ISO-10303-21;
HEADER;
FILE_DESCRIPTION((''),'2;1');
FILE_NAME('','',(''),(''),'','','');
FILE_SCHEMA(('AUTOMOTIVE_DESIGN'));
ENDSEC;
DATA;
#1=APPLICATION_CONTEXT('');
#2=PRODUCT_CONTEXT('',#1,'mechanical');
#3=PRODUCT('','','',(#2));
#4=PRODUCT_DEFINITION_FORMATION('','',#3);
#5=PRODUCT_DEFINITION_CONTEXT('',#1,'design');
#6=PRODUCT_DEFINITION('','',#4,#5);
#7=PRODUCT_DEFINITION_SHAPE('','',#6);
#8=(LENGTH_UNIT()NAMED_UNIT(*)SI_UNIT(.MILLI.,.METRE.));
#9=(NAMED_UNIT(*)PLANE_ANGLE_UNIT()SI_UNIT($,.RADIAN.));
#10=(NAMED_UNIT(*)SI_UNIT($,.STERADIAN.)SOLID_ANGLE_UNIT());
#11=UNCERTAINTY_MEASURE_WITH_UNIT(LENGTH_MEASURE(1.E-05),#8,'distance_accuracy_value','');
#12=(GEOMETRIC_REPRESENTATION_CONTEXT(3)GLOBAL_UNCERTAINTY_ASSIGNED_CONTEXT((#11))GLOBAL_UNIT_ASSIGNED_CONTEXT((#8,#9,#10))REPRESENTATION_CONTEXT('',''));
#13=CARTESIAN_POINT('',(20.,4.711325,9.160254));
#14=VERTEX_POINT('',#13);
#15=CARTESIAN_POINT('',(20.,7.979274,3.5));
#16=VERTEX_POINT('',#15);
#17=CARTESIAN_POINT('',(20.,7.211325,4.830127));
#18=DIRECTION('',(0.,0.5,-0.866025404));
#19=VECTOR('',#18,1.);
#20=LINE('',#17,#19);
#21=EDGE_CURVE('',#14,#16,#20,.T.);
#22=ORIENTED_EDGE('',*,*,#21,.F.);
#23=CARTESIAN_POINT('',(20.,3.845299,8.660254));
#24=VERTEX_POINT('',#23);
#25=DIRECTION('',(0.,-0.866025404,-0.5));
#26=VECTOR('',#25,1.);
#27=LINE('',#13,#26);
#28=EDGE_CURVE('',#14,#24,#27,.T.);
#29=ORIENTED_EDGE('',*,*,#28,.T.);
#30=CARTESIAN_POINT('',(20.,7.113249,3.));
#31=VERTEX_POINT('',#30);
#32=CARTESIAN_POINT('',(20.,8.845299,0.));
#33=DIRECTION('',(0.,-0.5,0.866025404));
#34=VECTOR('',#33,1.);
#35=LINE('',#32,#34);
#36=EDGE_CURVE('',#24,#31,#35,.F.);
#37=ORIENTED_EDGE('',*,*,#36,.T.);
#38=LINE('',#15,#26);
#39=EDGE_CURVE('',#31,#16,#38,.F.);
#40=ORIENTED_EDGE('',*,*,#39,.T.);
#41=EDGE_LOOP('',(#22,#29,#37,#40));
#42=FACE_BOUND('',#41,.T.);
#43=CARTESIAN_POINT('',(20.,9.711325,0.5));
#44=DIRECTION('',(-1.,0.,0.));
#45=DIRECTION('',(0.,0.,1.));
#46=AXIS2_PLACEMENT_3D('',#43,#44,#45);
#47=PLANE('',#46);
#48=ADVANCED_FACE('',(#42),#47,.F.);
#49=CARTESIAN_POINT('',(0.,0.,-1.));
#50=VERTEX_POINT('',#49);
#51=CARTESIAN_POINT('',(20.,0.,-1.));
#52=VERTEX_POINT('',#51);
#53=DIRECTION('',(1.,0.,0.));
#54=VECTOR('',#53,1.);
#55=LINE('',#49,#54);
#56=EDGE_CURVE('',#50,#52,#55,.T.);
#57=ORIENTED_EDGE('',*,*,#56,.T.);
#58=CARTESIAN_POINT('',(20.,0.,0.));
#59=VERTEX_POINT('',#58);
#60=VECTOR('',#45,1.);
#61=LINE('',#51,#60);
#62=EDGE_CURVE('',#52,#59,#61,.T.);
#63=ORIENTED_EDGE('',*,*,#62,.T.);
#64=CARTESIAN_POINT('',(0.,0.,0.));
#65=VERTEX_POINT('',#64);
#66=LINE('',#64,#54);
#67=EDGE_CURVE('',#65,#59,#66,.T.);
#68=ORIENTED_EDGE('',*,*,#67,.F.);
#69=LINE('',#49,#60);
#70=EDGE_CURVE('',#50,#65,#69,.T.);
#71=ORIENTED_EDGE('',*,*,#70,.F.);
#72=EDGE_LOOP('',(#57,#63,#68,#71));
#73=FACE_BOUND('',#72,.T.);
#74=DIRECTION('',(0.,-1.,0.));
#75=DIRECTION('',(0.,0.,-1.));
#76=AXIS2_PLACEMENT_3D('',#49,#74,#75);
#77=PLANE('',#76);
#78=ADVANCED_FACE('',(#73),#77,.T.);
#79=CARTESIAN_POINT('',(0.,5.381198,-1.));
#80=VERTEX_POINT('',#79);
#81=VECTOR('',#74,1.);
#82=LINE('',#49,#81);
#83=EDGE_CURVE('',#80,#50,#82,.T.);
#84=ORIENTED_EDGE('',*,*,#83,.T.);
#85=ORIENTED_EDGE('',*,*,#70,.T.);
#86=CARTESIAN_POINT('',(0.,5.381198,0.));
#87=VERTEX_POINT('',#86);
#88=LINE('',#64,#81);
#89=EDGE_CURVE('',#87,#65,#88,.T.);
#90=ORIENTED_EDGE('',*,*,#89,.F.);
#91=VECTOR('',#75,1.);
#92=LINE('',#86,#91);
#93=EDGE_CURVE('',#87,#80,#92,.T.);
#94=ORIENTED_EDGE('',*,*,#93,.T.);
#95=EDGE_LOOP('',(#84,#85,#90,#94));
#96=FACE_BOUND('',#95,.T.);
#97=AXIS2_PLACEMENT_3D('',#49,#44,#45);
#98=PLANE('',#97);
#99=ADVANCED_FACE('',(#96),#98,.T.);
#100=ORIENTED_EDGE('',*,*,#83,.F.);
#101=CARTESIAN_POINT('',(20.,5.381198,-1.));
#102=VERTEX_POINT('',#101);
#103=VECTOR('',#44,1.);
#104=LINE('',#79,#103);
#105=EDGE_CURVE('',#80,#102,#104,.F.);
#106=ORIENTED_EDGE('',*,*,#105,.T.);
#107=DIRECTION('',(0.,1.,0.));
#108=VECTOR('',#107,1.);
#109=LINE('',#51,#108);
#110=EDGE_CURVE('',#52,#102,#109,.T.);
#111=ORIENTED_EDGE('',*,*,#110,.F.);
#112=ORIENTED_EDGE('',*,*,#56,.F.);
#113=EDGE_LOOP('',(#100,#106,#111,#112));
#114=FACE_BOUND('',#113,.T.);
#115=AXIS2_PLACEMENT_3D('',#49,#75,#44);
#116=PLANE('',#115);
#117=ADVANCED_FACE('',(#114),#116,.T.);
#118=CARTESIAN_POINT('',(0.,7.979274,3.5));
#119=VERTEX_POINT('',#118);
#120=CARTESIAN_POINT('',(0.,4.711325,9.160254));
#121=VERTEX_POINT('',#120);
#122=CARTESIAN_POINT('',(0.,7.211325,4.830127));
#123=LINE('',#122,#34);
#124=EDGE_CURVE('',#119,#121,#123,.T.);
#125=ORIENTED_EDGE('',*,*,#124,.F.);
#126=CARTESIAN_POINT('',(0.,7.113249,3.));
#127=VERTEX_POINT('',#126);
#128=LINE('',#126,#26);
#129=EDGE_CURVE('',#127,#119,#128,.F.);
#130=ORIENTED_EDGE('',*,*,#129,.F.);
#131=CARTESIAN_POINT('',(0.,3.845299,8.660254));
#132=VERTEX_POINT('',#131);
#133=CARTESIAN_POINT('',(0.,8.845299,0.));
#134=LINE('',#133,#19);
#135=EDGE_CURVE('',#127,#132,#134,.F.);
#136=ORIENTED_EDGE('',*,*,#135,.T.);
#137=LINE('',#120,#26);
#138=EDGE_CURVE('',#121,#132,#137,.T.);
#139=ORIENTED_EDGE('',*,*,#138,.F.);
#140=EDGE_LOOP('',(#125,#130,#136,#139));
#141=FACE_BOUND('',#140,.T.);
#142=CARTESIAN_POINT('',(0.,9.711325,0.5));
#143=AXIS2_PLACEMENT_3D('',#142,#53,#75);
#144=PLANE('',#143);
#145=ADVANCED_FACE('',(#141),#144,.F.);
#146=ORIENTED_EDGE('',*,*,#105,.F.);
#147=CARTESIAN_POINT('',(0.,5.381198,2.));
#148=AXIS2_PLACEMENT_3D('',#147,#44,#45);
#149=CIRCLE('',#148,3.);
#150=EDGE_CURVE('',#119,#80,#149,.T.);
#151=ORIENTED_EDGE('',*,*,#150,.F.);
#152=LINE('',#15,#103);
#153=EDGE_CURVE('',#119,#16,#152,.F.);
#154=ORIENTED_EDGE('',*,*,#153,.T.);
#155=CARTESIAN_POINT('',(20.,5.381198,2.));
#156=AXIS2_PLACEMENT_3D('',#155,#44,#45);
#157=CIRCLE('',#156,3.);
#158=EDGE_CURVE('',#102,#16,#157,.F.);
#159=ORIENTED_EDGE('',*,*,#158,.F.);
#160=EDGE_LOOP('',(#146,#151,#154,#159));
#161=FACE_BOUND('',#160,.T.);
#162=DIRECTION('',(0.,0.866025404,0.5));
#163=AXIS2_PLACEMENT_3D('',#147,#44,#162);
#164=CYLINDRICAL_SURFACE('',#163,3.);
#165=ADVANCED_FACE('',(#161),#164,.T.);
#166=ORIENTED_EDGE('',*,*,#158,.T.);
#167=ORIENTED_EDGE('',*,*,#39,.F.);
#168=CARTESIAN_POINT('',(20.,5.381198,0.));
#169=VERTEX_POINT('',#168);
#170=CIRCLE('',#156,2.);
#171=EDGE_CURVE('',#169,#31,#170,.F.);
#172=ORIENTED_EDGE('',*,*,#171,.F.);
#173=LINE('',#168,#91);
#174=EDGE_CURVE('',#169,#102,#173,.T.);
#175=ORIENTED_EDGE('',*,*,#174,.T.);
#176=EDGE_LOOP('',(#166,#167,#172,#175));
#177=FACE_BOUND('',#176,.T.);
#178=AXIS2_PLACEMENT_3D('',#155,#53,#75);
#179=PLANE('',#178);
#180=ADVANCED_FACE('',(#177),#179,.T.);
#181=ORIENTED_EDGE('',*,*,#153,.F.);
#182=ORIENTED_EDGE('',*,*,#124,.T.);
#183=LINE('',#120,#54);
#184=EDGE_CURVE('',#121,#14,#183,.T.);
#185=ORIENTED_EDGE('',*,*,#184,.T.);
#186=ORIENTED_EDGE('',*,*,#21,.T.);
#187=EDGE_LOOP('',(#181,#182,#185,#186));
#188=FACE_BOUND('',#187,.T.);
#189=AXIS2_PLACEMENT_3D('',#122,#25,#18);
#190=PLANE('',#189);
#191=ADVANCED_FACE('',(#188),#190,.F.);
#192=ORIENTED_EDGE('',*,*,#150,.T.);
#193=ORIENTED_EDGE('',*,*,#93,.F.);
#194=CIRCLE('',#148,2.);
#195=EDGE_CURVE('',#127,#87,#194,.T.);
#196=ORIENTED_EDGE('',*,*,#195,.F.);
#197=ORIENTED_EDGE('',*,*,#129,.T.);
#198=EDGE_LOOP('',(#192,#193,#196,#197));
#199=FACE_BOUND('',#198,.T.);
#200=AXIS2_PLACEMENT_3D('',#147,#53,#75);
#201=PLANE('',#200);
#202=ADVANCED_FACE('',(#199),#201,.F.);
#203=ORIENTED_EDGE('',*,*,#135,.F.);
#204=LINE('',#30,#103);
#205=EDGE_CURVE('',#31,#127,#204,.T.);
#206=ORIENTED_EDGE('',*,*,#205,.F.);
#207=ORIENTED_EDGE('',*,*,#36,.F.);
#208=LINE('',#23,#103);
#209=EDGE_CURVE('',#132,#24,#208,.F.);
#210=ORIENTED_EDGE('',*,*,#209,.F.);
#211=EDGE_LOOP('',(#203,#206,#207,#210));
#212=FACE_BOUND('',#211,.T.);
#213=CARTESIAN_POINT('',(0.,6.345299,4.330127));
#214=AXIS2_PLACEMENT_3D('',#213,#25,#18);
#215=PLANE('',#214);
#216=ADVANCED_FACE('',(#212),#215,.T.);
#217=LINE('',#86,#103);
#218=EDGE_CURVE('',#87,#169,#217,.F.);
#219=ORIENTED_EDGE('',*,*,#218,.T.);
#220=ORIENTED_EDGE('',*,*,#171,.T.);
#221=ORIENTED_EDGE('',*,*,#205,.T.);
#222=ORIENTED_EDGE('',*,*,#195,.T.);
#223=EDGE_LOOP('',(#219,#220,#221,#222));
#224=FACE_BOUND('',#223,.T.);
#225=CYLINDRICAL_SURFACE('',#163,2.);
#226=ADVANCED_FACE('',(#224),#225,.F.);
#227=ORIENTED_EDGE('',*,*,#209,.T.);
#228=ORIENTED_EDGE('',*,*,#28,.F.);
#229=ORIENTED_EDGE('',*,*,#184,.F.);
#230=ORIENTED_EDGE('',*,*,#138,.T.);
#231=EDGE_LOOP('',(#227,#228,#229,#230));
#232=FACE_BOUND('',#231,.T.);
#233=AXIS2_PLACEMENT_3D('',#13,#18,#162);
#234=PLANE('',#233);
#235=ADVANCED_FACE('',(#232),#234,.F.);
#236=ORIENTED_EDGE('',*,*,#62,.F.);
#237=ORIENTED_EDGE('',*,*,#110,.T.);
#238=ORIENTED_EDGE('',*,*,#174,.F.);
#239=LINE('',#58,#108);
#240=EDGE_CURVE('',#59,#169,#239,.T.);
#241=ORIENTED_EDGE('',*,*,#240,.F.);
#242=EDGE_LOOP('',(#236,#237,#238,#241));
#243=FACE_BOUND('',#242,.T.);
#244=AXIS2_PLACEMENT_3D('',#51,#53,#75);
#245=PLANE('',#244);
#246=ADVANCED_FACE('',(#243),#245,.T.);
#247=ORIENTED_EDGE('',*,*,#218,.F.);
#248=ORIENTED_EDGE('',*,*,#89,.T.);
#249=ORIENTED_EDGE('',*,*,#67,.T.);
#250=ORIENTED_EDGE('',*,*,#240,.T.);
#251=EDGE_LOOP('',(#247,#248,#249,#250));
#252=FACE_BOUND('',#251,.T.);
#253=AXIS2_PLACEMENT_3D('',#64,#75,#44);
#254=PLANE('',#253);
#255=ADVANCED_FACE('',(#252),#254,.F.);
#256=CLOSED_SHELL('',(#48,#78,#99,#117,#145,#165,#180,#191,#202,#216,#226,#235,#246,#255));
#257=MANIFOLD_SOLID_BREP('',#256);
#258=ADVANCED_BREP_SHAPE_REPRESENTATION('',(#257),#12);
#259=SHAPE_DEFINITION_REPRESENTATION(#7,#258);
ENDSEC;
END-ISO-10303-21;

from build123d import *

# Parameters (mm, degrees)
SKETCH_1_W         = 20
SKETCH_1_H         = 10
BASEPLATE_DEPTH    = 1
EDGEFLANGE_DEPTH   = 20
EDGEFLANGE_2_DEPTH = 20


# Read off the part's stored shape, not the designer's step: EdgeFlange
# Sheet-metal steps are written as plain solids
with BuildPart() as part:
    # Sketch 1 → BasePlate (new body)
    with BuildSketch(Plane.XY):
        with Locations((10, 5)):
            Rectangle(SKETCH_1_W, SKETCH_1_H)
    extrude(amount=-BASEPLATE_DEPTH)

    # EdgeFlange outline → EdgeFlange (cut)
    with BuildSketch(Plane.YZ):
        with BuildLine():
            Line((10, 0), (7.617265824, 0))
            ThreePointArc((7.617265824, 0), (6.605942718, -0.738612788), (5.381197846, -1))
            Line((5.381197846, -1), (10, -1))
            Line((10, -1), (10, 0))
        make_face()
    extrude(amount=EDGEFLANGE_DEPTH, mode=Mode.SUBTRACT)

    # EdgeFlange 2 outline → EdgeFlange 2 (add)
    with BuildSketch(Plane.YZ):
        with BuildLine():
            ThreePointArc((7.617265824, 0), (8.365278527, 1.691353778), (7.979274058, 3.5))
            Line((7.979274058, 3.5), (4.711324865, 9.160254038))
            Line((4.711324865, 9.160254038), (3.845299462, 8.660254038))
            Line((3.845299462, 8.660254038), (7.113248654, 3))
            ThreePointArc((7.113248654, 3), (7.113248654, 1), (5.381197846, 0))
            Line((5.381197846, 0), (7.617265824, 0))
        make_face()
    extrude(amount=EDGEFLANGE_2_DEPTH)


solid = part.part
